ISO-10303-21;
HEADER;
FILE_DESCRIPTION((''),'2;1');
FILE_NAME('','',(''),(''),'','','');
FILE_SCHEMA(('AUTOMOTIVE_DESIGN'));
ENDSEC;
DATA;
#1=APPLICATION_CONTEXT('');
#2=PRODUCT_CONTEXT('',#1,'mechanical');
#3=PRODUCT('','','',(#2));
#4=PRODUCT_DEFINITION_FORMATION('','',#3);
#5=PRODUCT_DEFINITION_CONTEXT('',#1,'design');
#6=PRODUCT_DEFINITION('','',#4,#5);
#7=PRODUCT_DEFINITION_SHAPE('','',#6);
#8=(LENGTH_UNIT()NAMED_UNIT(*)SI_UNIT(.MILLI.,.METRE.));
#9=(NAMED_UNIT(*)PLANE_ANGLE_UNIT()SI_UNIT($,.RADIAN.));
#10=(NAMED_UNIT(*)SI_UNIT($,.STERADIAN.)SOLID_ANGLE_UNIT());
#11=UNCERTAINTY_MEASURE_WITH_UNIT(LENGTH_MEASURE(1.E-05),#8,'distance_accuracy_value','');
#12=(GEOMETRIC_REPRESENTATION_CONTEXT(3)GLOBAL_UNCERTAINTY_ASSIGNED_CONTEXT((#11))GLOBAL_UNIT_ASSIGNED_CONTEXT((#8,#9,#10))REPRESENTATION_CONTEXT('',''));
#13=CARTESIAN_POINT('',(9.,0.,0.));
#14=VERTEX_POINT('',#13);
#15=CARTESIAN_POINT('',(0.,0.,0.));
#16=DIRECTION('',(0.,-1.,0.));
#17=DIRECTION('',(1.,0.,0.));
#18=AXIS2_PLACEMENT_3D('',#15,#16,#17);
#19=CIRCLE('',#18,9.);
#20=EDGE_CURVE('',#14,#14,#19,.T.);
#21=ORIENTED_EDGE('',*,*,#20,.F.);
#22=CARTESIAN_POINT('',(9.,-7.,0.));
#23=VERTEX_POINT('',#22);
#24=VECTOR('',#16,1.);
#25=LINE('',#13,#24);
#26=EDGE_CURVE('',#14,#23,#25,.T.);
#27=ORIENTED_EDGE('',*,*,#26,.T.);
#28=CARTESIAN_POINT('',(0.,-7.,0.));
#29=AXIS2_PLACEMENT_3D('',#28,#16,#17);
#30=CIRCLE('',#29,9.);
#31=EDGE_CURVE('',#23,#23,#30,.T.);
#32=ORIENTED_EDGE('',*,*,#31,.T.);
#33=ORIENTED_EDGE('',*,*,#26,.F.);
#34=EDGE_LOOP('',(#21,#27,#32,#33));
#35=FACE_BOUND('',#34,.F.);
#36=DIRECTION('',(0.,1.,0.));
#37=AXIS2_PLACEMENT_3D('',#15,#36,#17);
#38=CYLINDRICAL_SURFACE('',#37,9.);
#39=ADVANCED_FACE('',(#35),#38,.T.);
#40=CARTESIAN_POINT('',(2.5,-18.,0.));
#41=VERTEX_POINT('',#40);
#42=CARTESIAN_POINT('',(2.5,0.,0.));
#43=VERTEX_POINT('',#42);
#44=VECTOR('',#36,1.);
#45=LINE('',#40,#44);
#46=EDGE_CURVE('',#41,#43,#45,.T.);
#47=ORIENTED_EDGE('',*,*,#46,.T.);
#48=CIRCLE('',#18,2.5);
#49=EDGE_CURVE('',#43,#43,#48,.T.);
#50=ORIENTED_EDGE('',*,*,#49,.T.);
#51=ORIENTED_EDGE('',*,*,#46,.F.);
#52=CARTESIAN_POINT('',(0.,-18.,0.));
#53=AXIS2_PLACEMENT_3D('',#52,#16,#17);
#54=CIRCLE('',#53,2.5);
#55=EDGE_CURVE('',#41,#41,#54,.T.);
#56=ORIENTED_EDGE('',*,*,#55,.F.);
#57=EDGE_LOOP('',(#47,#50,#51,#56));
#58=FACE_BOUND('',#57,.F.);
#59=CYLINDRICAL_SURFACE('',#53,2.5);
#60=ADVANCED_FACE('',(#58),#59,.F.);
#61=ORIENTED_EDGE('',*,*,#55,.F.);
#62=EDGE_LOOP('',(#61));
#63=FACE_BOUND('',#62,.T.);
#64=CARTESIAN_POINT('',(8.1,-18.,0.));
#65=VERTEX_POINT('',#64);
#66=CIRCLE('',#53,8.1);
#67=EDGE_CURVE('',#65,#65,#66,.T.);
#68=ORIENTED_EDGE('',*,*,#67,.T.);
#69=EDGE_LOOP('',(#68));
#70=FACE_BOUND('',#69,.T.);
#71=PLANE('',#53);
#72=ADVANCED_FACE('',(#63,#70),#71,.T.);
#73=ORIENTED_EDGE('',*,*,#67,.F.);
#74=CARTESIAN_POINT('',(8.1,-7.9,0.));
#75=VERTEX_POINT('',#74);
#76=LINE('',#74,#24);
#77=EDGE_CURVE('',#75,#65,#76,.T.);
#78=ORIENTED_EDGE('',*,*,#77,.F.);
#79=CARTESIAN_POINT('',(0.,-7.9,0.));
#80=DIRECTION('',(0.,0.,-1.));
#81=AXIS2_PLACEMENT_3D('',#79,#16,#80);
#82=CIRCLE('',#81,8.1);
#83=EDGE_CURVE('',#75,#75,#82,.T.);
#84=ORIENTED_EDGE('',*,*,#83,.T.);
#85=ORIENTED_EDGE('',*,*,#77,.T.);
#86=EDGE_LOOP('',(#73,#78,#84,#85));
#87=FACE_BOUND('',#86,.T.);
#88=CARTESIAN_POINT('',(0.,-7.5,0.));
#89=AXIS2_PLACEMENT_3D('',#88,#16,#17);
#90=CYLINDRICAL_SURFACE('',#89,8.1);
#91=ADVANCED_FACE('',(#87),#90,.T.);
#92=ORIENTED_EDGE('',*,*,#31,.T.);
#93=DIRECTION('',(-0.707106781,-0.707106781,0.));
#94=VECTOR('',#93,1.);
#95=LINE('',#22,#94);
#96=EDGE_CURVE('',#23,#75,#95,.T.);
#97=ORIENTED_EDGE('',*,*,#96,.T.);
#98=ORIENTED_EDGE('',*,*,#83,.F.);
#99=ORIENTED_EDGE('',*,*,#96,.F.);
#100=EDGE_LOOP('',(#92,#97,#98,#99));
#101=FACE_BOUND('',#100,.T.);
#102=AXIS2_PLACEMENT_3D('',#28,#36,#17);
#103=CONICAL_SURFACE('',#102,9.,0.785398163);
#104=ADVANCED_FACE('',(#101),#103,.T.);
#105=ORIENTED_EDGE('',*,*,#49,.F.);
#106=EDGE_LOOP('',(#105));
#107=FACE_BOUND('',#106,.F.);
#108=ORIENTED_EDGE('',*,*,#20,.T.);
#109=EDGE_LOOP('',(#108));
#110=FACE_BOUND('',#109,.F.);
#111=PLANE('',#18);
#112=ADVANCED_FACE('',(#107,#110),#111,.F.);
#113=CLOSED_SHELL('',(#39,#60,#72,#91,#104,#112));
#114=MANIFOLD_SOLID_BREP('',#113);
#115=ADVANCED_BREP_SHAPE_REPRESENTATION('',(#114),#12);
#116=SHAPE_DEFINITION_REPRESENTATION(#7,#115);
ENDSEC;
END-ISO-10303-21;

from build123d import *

# Parameters (mm, degrees)
F0_R        = 9
F1_DEPTH    = 8
F2_R        = 8.1
F3_DEPTH    = 10
F4_S5_R     = 8.1
F4_T6_DEPTH = 14
F5_R        = 2.5
F6_DEPTH    = 18.001


# Not quite as in the source:
# - a fillet or chamfer that OpenCascade refuses, or shapes differently, is made with other operations: its cross-section is extruded or revolved along the edge and cut away or added


with BuildPart() as f1:
    # F0 (on Front) → F1 (new body)
    with BuildSketch(Plane.XZ):
        Circle(F0_R)
    extrude(amount=F1_DEPTH)

    # F2 (on face) → F3 (join)
    with BuildSketch(Plane.XZ.offset(8)):
        Circle(F2_R)
    extrude(amount=F3_DEPTH)

    # F4: chamfer of 1 on 1 edges, made by hand


with BuildPart() as f4_tool2:
    # F4_s3 → F4_t4 (revolve)
    with BuildSketch(Plane.XY):
        Polygon((9, -7), (8, -8), (9, -8), align=None)
    revolve(axis=Axis((0, -8, 0), (0, -1, 0)))

    # F4_s5 → F4_t6 (cut, symmetric)
    with BuildSketch(Plane.XZ.offset(7.5)):
        Circle(F4_S5_R)
    extrude(amount=F4_T6_DEPTH, both=True, mode=Mode.SUBTRACT)


with BuildPart() as f1_1:
    add(f1.part)

    # F4_t1: cut F4_tool2
    add(f4_tool2.part, mode=Mode.SUBTRACT)

    # F5 (on face) → F6 (cut, through all)
    with BuildSketch(Plane.XZ.offset(18)):
        Circle(F5_R)
    extrude(amount=-F6_DEPTH, mode=Mode.SUBTRACT)


solid = f1_1.part
